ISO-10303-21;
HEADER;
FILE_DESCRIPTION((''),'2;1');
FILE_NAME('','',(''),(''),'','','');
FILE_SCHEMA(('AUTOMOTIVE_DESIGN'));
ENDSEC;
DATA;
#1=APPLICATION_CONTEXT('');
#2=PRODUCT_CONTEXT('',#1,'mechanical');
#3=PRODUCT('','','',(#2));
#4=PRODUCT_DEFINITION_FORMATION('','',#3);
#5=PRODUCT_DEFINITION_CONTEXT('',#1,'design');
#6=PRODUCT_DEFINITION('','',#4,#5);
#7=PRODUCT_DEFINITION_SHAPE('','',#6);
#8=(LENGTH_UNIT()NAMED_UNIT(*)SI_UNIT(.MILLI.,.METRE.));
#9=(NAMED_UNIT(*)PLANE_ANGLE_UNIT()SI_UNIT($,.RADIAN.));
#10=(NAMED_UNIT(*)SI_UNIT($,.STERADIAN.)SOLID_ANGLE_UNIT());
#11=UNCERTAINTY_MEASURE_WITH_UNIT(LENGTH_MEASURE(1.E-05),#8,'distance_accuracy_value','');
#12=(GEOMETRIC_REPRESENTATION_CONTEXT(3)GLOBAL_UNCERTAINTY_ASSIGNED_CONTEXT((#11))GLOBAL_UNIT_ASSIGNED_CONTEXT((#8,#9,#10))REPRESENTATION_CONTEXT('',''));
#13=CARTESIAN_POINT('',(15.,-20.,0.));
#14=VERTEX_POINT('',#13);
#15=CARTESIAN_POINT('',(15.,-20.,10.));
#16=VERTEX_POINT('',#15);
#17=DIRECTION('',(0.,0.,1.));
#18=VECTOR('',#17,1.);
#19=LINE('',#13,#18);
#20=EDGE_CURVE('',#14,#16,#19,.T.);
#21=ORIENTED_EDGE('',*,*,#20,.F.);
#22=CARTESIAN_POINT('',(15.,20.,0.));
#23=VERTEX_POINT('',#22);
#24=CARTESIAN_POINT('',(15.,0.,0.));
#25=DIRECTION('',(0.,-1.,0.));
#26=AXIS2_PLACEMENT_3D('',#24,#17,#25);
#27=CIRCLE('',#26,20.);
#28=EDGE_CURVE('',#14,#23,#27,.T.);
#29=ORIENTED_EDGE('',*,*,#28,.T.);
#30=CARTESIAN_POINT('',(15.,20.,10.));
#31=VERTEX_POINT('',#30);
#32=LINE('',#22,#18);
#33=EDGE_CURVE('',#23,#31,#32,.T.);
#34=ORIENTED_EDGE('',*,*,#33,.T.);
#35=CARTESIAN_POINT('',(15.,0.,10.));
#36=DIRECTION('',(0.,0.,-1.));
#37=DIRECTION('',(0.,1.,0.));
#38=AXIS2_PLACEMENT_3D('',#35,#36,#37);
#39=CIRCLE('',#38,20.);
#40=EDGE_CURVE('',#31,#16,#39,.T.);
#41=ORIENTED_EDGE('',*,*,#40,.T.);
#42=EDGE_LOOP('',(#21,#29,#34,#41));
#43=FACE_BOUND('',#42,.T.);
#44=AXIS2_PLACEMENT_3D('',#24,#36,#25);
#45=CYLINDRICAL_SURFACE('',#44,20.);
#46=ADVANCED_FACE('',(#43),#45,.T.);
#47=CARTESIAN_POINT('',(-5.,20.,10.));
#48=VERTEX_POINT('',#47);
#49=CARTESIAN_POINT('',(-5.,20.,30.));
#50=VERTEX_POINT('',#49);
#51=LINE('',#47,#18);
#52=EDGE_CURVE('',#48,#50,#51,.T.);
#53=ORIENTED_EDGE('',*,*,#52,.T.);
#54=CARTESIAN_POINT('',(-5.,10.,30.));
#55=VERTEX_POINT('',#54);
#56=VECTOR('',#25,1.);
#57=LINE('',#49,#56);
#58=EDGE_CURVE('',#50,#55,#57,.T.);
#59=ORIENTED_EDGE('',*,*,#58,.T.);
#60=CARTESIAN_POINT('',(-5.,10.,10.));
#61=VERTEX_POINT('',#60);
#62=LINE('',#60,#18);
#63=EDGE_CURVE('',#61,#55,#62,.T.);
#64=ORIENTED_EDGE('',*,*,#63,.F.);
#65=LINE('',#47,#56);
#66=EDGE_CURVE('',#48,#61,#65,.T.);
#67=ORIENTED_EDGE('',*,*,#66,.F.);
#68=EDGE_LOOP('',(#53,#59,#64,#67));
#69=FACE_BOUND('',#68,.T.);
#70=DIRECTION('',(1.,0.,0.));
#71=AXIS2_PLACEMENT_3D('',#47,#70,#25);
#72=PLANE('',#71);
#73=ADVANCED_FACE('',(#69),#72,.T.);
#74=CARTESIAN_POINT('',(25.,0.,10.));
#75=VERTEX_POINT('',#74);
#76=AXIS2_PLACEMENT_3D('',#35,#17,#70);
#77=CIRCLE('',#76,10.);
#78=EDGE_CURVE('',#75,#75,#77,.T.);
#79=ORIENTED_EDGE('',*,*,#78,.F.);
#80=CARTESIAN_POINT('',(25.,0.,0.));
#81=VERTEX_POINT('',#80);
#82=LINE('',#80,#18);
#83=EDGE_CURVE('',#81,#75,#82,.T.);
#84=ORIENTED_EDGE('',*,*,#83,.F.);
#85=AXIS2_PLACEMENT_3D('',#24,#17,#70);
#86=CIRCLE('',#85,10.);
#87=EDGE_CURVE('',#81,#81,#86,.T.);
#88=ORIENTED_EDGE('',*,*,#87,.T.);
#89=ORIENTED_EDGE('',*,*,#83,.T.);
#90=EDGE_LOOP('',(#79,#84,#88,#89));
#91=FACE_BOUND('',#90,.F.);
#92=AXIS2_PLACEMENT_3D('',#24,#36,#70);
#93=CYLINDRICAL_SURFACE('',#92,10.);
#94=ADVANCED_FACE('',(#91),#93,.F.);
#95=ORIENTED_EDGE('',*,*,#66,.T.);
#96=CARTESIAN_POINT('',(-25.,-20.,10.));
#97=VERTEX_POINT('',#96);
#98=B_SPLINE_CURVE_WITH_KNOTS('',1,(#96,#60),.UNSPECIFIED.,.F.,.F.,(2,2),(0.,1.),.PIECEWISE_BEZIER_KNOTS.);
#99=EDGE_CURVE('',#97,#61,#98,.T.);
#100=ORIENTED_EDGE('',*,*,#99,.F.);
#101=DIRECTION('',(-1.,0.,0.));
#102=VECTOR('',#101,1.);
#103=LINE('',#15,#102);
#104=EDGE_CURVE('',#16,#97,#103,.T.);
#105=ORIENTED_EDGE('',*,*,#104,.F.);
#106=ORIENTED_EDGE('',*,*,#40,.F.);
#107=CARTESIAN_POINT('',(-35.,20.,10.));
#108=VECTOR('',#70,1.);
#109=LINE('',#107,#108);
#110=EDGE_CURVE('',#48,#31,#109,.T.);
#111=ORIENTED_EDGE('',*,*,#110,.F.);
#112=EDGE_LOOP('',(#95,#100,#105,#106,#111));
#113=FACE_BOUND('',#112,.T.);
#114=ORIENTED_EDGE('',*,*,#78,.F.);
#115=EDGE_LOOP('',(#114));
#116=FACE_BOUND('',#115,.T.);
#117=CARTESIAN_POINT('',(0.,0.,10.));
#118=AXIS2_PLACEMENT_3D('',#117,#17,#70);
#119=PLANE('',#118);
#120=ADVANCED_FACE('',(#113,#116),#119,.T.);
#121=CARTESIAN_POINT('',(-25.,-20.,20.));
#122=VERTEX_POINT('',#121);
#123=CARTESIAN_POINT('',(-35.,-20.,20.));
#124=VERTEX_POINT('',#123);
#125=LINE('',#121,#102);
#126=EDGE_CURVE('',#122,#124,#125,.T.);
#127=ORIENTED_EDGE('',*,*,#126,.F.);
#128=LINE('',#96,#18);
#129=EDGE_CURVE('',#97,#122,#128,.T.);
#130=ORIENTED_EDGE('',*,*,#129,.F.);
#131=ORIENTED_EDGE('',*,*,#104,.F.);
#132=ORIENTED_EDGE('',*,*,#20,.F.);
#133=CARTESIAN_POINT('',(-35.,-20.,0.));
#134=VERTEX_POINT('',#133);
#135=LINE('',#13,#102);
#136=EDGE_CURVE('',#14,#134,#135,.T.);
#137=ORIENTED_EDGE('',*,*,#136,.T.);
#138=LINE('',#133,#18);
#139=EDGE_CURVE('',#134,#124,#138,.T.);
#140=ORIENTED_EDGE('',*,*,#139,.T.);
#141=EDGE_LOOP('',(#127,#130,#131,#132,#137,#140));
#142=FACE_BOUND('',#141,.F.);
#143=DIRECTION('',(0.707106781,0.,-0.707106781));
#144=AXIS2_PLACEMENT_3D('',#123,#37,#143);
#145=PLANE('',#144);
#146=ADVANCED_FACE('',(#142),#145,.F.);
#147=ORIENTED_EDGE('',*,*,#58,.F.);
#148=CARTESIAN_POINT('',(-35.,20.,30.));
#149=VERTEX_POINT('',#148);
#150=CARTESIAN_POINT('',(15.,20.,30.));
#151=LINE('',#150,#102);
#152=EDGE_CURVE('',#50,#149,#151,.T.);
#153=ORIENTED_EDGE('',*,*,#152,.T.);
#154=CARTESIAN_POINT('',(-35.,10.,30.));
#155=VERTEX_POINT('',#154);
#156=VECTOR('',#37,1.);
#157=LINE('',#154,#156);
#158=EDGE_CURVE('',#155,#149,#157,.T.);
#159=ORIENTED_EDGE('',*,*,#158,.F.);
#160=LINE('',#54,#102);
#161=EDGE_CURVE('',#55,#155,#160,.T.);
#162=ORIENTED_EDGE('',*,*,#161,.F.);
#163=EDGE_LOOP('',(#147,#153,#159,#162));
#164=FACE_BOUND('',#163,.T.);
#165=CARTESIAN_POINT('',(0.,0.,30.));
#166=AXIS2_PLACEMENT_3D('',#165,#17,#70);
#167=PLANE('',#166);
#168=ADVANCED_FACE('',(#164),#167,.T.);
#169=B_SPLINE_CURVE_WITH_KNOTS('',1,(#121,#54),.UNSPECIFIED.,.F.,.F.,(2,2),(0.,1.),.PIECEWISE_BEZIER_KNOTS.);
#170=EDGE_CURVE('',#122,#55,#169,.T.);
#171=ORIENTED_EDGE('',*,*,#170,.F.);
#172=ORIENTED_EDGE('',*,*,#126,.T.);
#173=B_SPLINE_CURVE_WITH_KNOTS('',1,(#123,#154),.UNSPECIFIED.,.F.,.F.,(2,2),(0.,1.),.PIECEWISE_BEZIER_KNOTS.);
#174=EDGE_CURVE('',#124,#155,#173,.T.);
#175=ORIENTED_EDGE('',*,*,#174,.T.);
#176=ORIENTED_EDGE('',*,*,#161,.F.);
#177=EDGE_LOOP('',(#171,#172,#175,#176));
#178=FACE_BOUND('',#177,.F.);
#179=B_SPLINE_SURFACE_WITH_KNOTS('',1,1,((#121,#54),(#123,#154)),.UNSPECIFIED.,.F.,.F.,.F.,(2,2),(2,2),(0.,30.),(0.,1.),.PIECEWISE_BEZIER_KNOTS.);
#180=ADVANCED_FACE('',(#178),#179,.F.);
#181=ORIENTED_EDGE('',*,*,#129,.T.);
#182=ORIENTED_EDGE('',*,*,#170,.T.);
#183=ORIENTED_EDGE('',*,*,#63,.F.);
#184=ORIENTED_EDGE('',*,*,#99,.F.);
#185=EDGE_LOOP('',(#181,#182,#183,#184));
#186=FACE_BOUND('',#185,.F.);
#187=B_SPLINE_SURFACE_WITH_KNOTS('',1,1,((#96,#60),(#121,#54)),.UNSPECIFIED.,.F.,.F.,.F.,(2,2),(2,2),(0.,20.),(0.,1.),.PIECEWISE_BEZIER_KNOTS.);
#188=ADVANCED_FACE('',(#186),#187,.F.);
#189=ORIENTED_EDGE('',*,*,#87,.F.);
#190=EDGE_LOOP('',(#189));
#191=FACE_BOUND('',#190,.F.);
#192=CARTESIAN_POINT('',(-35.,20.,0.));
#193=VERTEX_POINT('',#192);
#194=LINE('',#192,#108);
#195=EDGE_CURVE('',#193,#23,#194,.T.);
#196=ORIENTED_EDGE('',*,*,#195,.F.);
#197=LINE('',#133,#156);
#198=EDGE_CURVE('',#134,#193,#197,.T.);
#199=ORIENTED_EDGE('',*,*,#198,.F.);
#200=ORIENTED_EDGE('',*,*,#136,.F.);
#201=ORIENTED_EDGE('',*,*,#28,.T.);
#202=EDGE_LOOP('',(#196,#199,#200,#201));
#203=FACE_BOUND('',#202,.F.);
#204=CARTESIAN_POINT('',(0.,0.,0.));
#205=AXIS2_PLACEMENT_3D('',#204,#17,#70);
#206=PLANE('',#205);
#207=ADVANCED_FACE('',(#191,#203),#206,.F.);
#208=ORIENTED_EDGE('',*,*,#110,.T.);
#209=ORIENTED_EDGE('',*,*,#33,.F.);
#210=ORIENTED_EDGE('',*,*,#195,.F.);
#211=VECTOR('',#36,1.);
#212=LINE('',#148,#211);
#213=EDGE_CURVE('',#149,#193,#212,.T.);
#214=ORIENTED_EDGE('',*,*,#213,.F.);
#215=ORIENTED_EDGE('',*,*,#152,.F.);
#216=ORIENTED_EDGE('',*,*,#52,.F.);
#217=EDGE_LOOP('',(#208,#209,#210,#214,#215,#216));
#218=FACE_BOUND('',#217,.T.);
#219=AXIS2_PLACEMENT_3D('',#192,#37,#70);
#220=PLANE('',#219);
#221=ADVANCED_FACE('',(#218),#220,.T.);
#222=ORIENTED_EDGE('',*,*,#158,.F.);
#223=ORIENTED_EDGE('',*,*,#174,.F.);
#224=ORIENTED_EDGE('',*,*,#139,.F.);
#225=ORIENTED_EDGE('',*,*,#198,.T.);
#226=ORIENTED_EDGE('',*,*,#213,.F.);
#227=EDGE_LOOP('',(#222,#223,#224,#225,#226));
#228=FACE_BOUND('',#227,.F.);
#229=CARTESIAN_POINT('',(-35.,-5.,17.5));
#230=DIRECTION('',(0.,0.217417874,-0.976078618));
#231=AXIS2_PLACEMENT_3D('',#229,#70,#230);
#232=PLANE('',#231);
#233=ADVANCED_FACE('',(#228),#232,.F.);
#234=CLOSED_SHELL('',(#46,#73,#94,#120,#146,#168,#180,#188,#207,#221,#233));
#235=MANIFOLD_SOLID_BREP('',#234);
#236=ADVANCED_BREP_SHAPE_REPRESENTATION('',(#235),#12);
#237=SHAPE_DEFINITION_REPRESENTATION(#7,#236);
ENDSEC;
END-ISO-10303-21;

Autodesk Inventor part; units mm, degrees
ref_plane "YZ Plane" through (0, 0, 0) normal (1, 0, 0) x (0, 1, 0)
ref_plane "XZ Plane" through (0, 0, 0) normal (0, 1, 0) x (-1, 0, 0)
ref_plane "XY Plane" through (0, 0, 0) normal (0, 0, 1) x (1, 0, 0)
sketch "草圖1" plane through (0, 0, 0) normal (0, 0, 1) x (1, 0, 0)
  line L0 (15, -20) -> (-35, -20)
  line L1 (-35, -20) -> (-35, 20)
  line L2 (-35, 20) -> (15, 20)
  line L3 (35, 0) -> (35, 0)
  line L4 (35, -20) -> (-35, 20) construction
  line L5 (-35, -20) -> (35, 20) construction
  circle A0 centre (15, 0) radius 10
  arc A1 (35, 0) -> (15, 20) centre (15, 0) ccw
  arc A2 (15, -20) -> (35, 0) centre (15, 0) ccw
  point P0 (0, 0)
  dimension "d0" = 70
  dimension "d1" = 40
  dimension "d2" = 20
  dimension "d3" = 20
  dimension "d4" = 20
  dimension "d5" = 20
extrude "擠出1" add sketch "草圖1" along normal blind 10
sketch "草圖2" plane through (0, 0, 10) normal (0, 0, 1) x (1, 0, 0)
  line L0 (15, 20) -> (-35, 20) projected
  line L1 (-35, 20) -> (-5, 20)
  line L2 (-5, 20) -> (-5, 10)
  line L3 (-5, 10) -> (-35, 10)
  line L4 (-35, 10) -> (-35, 20)
  point P0 (0, 0)
  dimension "d8" = 10
  dimension "d9" = 30
extrude "擠出2" add sketch "草圖2" along normal blind 20
sketch "草圖4" plane through (-35, -20, 0) normal (0, -1, 0) x (1, 0, 0)
  line L0 (0, 10) -> (50, 10) projected
  line L1 (0, 10) -> (10, 10)
  line L2 (10, 10) -> (10, 20)
  line L3 (10, 20) -> (0, 20)
  line L4 (0, 20) -> (0, 10)
  point P0 (35, 0)
  dimension "d12" = 10
  dimension "d13" = 10
loft "斷面混成1" add profiles "草圖4" section 2 edges at (-20, 10, 10) (-5, 10, 20) (-20, 10, 30) (-35, 10, 20)
properties part number "件27"
